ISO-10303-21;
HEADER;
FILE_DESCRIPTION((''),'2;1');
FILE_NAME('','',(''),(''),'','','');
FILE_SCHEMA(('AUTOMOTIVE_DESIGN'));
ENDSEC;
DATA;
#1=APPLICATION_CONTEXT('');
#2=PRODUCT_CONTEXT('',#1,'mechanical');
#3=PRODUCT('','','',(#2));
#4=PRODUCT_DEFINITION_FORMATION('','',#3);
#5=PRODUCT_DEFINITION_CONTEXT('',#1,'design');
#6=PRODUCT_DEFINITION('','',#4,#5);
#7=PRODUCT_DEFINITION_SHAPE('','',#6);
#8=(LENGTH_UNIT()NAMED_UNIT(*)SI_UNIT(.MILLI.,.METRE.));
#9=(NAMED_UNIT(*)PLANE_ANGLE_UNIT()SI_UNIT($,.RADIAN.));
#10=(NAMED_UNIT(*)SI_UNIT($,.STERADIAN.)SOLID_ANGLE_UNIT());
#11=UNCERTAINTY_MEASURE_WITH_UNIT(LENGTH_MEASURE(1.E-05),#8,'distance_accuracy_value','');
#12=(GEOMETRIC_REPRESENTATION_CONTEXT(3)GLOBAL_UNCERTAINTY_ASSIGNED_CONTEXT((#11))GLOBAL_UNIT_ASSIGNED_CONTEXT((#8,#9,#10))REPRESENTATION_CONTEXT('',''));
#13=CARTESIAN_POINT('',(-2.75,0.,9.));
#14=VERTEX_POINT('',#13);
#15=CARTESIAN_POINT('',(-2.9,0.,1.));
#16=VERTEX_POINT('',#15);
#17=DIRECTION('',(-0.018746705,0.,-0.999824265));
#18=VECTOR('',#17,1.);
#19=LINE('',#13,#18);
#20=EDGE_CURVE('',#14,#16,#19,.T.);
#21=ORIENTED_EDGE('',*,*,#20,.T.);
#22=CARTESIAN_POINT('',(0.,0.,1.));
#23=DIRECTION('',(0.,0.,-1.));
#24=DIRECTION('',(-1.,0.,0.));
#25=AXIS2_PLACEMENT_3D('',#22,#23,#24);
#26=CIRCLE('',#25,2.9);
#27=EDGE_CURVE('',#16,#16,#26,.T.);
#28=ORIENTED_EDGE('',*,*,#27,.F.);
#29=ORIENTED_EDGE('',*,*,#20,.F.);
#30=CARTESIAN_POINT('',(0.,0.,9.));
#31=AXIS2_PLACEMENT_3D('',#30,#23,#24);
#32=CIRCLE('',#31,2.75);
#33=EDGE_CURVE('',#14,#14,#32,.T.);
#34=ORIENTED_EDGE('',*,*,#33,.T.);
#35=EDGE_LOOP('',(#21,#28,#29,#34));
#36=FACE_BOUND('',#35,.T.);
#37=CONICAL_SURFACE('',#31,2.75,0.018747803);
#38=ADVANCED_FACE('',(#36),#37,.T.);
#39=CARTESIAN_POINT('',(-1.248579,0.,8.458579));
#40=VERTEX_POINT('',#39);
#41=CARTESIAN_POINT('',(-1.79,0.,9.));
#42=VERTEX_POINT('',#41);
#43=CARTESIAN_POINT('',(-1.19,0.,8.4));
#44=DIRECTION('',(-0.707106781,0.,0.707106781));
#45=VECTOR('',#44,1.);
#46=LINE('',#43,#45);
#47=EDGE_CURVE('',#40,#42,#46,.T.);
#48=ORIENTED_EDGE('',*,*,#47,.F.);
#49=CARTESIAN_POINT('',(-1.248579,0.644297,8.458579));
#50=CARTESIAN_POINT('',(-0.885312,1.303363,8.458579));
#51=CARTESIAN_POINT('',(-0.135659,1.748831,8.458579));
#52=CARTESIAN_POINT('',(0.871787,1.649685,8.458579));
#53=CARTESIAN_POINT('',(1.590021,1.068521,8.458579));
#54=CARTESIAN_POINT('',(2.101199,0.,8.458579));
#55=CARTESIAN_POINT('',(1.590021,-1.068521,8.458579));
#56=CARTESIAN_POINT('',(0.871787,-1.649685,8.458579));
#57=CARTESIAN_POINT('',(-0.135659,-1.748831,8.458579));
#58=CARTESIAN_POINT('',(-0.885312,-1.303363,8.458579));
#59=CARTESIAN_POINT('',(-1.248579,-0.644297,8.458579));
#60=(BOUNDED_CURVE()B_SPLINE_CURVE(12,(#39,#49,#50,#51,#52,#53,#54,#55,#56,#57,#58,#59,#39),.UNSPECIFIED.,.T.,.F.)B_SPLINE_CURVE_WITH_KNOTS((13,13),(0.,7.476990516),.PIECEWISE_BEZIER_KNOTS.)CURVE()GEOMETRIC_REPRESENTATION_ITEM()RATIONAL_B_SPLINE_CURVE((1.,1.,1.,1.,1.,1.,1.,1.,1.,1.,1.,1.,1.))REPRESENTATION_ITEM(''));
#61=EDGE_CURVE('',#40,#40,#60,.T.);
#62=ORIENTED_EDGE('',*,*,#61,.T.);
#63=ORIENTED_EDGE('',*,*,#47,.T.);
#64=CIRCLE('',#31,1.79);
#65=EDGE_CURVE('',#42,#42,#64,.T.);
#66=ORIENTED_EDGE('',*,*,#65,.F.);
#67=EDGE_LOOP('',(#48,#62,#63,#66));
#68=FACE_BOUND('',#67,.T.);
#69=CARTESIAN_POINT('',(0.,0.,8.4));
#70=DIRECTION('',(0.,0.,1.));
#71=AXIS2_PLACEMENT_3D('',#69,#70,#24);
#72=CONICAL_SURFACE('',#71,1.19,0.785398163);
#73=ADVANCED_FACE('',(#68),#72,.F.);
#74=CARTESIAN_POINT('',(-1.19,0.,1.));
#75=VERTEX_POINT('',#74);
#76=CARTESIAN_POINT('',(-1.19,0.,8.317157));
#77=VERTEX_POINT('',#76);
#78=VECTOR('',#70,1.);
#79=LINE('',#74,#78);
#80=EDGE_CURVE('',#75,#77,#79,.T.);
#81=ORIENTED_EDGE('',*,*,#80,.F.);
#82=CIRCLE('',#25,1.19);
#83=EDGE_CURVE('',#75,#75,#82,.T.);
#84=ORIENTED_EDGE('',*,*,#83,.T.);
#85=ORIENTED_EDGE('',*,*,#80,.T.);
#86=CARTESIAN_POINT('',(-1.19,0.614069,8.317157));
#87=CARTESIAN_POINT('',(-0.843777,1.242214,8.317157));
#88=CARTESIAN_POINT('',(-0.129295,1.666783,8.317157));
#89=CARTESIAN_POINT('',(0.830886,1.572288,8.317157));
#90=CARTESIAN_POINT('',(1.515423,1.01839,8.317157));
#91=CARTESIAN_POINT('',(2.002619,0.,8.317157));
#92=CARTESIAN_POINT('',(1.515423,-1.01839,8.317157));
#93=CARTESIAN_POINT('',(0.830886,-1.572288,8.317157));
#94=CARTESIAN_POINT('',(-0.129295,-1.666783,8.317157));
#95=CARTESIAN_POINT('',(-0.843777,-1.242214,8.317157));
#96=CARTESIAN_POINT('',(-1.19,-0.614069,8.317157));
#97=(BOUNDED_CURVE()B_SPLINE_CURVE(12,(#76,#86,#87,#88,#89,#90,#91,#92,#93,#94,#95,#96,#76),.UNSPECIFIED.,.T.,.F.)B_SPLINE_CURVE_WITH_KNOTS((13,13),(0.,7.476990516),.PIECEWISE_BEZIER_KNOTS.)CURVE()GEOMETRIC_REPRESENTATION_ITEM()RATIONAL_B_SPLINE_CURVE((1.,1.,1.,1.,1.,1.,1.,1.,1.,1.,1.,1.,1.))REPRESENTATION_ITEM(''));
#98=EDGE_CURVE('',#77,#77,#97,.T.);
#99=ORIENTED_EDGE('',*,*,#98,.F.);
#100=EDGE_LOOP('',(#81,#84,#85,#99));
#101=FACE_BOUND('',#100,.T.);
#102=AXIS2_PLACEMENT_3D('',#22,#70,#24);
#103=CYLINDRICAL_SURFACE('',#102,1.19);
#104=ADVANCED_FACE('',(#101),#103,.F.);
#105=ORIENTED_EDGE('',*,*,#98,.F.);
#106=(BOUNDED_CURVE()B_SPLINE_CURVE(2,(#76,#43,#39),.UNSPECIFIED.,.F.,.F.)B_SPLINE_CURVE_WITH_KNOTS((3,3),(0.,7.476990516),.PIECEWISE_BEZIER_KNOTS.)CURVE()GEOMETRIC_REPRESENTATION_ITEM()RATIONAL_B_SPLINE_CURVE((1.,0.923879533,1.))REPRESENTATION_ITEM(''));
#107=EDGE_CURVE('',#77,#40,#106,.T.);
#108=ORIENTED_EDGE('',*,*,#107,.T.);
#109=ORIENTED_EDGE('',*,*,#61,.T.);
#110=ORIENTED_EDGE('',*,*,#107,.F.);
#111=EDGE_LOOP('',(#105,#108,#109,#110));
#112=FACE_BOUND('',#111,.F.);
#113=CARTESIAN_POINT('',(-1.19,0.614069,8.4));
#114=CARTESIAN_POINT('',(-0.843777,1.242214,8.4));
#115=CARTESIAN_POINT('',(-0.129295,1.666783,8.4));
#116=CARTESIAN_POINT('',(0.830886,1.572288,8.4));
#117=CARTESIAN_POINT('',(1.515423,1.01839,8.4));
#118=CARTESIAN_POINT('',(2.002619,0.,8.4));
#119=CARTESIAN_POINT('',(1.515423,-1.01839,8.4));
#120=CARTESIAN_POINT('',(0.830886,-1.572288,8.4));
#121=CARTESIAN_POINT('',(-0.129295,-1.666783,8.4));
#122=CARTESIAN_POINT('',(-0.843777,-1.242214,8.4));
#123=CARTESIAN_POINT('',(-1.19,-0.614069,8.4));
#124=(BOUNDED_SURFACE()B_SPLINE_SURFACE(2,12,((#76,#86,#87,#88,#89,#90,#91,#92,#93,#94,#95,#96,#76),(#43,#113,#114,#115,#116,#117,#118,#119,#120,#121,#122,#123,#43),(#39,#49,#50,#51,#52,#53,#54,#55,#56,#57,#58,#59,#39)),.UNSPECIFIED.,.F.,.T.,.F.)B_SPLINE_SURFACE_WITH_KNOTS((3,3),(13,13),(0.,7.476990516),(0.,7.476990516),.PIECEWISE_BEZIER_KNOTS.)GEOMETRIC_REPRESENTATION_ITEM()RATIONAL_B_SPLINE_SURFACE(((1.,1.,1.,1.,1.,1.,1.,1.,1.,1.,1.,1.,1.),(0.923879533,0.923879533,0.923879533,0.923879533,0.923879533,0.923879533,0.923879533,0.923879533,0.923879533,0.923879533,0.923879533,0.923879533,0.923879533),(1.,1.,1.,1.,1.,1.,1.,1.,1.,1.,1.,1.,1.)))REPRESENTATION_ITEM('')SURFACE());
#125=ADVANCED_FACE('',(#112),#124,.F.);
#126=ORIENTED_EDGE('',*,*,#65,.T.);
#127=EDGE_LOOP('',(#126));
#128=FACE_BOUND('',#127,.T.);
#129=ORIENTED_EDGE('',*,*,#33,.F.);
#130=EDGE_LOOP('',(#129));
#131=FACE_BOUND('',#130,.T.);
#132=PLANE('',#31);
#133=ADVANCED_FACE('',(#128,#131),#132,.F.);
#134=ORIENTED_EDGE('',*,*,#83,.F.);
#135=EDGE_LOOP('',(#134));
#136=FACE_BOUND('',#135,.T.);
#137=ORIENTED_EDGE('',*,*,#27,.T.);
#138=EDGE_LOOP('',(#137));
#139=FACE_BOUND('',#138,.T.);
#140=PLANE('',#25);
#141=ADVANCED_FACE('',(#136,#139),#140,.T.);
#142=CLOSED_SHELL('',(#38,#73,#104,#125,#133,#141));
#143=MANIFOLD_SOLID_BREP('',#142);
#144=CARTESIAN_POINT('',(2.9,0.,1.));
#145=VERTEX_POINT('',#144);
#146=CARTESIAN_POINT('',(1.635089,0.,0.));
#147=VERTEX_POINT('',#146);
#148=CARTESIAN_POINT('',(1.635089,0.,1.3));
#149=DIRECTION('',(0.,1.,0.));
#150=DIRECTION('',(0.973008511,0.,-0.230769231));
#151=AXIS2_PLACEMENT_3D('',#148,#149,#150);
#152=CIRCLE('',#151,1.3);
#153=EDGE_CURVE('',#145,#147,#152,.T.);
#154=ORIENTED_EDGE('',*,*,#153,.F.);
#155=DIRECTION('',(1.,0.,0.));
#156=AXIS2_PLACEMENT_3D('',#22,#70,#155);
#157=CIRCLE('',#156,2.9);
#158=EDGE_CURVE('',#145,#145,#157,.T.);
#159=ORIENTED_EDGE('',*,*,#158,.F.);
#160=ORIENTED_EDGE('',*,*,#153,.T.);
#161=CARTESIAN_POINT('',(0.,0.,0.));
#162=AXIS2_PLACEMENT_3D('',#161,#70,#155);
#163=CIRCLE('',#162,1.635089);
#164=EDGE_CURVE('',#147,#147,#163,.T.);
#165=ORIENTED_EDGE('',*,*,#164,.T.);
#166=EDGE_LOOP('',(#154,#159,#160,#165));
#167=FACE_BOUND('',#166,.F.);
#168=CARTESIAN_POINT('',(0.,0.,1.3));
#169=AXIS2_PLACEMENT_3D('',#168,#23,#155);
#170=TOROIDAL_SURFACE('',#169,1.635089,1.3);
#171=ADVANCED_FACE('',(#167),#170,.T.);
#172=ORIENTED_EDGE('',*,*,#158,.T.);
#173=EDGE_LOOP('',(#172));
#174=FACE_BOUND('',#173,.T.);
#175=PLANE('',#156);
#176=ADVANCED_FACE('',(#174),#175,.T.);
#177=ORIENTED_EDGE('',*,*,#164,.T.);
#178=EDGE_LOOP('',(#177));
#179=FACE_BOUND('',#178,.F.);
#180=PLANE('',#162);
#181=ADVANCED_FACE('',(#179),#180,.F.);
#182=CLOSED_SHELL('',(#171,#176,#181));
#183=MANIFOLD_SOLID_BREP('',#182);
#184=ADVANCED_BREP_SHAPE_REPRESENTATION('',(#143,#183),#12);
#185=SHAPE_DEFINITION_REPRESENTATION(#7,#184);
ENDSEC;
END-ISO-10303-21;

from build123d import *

# Parameters (mm, degrees)
F0_R     = 2.9
F1_DEPTH = 1
F5_SIZE  = 0.6
F6_R     = 0.2


# Not quite as in the source:
# - a fillet or chamfer that OpenCascade refuses, or shapes differently, is made with other operations: its cross-section is extruded or revolved along the edge and cut away or added


with BuildPart() as f1:
    # F0 (on Top) → F1 (new body)
    with BuildSketch(Plane.XY):
        Circle(F0_R)
    extrude(amount=F1_DEPTH)

    # F4: fillet of radius 1.3 on 1 edges, made by hand

    # F4_s1 → F4_t2 (revolve, cut)
    with BuildSketch(Plane.XZ):
        with BuildLine():
            ThreePointArc((2.9, 1), (2.4413147108, 0.2801960973), (1.6350889359, 0))
            Line((1.6350889359, 0), (2.9, 0))
            Line((2.9, 0), (2.9, 1))
        make_face()
    revolve(axis=Axis((0, 0, 0), (0, 0, 1)), mode=Mode.SUBTRACT)


with BuildPart() as f3:
    # F2 (on Front) → F3 (revolve)
    with BuildSketch(Plane.XZ):
        Polygon((-2.9, 1), (-1.19, 1), (-1.19, 9), (-2.75, 9), align=None)
    revolve(axis=Axis((0, 0, 5), (0, 0, -1)))

    # F5
    f5_edges = [f3.edges().sort_by_distance(p)[0] for p in [
        (1.19, 0, 9),
    ]]
    chamfer(f5_edges, length=F5_SIZE)

    # F6
    f6_edges = [f3.edges().sort_by_distance(p)[0] for p in [
        (1.19, 0, 8.4),
    ]]
    fillet(f6_edges, radius=F6_R)


solid = Compound([f1.part, f3.part])
